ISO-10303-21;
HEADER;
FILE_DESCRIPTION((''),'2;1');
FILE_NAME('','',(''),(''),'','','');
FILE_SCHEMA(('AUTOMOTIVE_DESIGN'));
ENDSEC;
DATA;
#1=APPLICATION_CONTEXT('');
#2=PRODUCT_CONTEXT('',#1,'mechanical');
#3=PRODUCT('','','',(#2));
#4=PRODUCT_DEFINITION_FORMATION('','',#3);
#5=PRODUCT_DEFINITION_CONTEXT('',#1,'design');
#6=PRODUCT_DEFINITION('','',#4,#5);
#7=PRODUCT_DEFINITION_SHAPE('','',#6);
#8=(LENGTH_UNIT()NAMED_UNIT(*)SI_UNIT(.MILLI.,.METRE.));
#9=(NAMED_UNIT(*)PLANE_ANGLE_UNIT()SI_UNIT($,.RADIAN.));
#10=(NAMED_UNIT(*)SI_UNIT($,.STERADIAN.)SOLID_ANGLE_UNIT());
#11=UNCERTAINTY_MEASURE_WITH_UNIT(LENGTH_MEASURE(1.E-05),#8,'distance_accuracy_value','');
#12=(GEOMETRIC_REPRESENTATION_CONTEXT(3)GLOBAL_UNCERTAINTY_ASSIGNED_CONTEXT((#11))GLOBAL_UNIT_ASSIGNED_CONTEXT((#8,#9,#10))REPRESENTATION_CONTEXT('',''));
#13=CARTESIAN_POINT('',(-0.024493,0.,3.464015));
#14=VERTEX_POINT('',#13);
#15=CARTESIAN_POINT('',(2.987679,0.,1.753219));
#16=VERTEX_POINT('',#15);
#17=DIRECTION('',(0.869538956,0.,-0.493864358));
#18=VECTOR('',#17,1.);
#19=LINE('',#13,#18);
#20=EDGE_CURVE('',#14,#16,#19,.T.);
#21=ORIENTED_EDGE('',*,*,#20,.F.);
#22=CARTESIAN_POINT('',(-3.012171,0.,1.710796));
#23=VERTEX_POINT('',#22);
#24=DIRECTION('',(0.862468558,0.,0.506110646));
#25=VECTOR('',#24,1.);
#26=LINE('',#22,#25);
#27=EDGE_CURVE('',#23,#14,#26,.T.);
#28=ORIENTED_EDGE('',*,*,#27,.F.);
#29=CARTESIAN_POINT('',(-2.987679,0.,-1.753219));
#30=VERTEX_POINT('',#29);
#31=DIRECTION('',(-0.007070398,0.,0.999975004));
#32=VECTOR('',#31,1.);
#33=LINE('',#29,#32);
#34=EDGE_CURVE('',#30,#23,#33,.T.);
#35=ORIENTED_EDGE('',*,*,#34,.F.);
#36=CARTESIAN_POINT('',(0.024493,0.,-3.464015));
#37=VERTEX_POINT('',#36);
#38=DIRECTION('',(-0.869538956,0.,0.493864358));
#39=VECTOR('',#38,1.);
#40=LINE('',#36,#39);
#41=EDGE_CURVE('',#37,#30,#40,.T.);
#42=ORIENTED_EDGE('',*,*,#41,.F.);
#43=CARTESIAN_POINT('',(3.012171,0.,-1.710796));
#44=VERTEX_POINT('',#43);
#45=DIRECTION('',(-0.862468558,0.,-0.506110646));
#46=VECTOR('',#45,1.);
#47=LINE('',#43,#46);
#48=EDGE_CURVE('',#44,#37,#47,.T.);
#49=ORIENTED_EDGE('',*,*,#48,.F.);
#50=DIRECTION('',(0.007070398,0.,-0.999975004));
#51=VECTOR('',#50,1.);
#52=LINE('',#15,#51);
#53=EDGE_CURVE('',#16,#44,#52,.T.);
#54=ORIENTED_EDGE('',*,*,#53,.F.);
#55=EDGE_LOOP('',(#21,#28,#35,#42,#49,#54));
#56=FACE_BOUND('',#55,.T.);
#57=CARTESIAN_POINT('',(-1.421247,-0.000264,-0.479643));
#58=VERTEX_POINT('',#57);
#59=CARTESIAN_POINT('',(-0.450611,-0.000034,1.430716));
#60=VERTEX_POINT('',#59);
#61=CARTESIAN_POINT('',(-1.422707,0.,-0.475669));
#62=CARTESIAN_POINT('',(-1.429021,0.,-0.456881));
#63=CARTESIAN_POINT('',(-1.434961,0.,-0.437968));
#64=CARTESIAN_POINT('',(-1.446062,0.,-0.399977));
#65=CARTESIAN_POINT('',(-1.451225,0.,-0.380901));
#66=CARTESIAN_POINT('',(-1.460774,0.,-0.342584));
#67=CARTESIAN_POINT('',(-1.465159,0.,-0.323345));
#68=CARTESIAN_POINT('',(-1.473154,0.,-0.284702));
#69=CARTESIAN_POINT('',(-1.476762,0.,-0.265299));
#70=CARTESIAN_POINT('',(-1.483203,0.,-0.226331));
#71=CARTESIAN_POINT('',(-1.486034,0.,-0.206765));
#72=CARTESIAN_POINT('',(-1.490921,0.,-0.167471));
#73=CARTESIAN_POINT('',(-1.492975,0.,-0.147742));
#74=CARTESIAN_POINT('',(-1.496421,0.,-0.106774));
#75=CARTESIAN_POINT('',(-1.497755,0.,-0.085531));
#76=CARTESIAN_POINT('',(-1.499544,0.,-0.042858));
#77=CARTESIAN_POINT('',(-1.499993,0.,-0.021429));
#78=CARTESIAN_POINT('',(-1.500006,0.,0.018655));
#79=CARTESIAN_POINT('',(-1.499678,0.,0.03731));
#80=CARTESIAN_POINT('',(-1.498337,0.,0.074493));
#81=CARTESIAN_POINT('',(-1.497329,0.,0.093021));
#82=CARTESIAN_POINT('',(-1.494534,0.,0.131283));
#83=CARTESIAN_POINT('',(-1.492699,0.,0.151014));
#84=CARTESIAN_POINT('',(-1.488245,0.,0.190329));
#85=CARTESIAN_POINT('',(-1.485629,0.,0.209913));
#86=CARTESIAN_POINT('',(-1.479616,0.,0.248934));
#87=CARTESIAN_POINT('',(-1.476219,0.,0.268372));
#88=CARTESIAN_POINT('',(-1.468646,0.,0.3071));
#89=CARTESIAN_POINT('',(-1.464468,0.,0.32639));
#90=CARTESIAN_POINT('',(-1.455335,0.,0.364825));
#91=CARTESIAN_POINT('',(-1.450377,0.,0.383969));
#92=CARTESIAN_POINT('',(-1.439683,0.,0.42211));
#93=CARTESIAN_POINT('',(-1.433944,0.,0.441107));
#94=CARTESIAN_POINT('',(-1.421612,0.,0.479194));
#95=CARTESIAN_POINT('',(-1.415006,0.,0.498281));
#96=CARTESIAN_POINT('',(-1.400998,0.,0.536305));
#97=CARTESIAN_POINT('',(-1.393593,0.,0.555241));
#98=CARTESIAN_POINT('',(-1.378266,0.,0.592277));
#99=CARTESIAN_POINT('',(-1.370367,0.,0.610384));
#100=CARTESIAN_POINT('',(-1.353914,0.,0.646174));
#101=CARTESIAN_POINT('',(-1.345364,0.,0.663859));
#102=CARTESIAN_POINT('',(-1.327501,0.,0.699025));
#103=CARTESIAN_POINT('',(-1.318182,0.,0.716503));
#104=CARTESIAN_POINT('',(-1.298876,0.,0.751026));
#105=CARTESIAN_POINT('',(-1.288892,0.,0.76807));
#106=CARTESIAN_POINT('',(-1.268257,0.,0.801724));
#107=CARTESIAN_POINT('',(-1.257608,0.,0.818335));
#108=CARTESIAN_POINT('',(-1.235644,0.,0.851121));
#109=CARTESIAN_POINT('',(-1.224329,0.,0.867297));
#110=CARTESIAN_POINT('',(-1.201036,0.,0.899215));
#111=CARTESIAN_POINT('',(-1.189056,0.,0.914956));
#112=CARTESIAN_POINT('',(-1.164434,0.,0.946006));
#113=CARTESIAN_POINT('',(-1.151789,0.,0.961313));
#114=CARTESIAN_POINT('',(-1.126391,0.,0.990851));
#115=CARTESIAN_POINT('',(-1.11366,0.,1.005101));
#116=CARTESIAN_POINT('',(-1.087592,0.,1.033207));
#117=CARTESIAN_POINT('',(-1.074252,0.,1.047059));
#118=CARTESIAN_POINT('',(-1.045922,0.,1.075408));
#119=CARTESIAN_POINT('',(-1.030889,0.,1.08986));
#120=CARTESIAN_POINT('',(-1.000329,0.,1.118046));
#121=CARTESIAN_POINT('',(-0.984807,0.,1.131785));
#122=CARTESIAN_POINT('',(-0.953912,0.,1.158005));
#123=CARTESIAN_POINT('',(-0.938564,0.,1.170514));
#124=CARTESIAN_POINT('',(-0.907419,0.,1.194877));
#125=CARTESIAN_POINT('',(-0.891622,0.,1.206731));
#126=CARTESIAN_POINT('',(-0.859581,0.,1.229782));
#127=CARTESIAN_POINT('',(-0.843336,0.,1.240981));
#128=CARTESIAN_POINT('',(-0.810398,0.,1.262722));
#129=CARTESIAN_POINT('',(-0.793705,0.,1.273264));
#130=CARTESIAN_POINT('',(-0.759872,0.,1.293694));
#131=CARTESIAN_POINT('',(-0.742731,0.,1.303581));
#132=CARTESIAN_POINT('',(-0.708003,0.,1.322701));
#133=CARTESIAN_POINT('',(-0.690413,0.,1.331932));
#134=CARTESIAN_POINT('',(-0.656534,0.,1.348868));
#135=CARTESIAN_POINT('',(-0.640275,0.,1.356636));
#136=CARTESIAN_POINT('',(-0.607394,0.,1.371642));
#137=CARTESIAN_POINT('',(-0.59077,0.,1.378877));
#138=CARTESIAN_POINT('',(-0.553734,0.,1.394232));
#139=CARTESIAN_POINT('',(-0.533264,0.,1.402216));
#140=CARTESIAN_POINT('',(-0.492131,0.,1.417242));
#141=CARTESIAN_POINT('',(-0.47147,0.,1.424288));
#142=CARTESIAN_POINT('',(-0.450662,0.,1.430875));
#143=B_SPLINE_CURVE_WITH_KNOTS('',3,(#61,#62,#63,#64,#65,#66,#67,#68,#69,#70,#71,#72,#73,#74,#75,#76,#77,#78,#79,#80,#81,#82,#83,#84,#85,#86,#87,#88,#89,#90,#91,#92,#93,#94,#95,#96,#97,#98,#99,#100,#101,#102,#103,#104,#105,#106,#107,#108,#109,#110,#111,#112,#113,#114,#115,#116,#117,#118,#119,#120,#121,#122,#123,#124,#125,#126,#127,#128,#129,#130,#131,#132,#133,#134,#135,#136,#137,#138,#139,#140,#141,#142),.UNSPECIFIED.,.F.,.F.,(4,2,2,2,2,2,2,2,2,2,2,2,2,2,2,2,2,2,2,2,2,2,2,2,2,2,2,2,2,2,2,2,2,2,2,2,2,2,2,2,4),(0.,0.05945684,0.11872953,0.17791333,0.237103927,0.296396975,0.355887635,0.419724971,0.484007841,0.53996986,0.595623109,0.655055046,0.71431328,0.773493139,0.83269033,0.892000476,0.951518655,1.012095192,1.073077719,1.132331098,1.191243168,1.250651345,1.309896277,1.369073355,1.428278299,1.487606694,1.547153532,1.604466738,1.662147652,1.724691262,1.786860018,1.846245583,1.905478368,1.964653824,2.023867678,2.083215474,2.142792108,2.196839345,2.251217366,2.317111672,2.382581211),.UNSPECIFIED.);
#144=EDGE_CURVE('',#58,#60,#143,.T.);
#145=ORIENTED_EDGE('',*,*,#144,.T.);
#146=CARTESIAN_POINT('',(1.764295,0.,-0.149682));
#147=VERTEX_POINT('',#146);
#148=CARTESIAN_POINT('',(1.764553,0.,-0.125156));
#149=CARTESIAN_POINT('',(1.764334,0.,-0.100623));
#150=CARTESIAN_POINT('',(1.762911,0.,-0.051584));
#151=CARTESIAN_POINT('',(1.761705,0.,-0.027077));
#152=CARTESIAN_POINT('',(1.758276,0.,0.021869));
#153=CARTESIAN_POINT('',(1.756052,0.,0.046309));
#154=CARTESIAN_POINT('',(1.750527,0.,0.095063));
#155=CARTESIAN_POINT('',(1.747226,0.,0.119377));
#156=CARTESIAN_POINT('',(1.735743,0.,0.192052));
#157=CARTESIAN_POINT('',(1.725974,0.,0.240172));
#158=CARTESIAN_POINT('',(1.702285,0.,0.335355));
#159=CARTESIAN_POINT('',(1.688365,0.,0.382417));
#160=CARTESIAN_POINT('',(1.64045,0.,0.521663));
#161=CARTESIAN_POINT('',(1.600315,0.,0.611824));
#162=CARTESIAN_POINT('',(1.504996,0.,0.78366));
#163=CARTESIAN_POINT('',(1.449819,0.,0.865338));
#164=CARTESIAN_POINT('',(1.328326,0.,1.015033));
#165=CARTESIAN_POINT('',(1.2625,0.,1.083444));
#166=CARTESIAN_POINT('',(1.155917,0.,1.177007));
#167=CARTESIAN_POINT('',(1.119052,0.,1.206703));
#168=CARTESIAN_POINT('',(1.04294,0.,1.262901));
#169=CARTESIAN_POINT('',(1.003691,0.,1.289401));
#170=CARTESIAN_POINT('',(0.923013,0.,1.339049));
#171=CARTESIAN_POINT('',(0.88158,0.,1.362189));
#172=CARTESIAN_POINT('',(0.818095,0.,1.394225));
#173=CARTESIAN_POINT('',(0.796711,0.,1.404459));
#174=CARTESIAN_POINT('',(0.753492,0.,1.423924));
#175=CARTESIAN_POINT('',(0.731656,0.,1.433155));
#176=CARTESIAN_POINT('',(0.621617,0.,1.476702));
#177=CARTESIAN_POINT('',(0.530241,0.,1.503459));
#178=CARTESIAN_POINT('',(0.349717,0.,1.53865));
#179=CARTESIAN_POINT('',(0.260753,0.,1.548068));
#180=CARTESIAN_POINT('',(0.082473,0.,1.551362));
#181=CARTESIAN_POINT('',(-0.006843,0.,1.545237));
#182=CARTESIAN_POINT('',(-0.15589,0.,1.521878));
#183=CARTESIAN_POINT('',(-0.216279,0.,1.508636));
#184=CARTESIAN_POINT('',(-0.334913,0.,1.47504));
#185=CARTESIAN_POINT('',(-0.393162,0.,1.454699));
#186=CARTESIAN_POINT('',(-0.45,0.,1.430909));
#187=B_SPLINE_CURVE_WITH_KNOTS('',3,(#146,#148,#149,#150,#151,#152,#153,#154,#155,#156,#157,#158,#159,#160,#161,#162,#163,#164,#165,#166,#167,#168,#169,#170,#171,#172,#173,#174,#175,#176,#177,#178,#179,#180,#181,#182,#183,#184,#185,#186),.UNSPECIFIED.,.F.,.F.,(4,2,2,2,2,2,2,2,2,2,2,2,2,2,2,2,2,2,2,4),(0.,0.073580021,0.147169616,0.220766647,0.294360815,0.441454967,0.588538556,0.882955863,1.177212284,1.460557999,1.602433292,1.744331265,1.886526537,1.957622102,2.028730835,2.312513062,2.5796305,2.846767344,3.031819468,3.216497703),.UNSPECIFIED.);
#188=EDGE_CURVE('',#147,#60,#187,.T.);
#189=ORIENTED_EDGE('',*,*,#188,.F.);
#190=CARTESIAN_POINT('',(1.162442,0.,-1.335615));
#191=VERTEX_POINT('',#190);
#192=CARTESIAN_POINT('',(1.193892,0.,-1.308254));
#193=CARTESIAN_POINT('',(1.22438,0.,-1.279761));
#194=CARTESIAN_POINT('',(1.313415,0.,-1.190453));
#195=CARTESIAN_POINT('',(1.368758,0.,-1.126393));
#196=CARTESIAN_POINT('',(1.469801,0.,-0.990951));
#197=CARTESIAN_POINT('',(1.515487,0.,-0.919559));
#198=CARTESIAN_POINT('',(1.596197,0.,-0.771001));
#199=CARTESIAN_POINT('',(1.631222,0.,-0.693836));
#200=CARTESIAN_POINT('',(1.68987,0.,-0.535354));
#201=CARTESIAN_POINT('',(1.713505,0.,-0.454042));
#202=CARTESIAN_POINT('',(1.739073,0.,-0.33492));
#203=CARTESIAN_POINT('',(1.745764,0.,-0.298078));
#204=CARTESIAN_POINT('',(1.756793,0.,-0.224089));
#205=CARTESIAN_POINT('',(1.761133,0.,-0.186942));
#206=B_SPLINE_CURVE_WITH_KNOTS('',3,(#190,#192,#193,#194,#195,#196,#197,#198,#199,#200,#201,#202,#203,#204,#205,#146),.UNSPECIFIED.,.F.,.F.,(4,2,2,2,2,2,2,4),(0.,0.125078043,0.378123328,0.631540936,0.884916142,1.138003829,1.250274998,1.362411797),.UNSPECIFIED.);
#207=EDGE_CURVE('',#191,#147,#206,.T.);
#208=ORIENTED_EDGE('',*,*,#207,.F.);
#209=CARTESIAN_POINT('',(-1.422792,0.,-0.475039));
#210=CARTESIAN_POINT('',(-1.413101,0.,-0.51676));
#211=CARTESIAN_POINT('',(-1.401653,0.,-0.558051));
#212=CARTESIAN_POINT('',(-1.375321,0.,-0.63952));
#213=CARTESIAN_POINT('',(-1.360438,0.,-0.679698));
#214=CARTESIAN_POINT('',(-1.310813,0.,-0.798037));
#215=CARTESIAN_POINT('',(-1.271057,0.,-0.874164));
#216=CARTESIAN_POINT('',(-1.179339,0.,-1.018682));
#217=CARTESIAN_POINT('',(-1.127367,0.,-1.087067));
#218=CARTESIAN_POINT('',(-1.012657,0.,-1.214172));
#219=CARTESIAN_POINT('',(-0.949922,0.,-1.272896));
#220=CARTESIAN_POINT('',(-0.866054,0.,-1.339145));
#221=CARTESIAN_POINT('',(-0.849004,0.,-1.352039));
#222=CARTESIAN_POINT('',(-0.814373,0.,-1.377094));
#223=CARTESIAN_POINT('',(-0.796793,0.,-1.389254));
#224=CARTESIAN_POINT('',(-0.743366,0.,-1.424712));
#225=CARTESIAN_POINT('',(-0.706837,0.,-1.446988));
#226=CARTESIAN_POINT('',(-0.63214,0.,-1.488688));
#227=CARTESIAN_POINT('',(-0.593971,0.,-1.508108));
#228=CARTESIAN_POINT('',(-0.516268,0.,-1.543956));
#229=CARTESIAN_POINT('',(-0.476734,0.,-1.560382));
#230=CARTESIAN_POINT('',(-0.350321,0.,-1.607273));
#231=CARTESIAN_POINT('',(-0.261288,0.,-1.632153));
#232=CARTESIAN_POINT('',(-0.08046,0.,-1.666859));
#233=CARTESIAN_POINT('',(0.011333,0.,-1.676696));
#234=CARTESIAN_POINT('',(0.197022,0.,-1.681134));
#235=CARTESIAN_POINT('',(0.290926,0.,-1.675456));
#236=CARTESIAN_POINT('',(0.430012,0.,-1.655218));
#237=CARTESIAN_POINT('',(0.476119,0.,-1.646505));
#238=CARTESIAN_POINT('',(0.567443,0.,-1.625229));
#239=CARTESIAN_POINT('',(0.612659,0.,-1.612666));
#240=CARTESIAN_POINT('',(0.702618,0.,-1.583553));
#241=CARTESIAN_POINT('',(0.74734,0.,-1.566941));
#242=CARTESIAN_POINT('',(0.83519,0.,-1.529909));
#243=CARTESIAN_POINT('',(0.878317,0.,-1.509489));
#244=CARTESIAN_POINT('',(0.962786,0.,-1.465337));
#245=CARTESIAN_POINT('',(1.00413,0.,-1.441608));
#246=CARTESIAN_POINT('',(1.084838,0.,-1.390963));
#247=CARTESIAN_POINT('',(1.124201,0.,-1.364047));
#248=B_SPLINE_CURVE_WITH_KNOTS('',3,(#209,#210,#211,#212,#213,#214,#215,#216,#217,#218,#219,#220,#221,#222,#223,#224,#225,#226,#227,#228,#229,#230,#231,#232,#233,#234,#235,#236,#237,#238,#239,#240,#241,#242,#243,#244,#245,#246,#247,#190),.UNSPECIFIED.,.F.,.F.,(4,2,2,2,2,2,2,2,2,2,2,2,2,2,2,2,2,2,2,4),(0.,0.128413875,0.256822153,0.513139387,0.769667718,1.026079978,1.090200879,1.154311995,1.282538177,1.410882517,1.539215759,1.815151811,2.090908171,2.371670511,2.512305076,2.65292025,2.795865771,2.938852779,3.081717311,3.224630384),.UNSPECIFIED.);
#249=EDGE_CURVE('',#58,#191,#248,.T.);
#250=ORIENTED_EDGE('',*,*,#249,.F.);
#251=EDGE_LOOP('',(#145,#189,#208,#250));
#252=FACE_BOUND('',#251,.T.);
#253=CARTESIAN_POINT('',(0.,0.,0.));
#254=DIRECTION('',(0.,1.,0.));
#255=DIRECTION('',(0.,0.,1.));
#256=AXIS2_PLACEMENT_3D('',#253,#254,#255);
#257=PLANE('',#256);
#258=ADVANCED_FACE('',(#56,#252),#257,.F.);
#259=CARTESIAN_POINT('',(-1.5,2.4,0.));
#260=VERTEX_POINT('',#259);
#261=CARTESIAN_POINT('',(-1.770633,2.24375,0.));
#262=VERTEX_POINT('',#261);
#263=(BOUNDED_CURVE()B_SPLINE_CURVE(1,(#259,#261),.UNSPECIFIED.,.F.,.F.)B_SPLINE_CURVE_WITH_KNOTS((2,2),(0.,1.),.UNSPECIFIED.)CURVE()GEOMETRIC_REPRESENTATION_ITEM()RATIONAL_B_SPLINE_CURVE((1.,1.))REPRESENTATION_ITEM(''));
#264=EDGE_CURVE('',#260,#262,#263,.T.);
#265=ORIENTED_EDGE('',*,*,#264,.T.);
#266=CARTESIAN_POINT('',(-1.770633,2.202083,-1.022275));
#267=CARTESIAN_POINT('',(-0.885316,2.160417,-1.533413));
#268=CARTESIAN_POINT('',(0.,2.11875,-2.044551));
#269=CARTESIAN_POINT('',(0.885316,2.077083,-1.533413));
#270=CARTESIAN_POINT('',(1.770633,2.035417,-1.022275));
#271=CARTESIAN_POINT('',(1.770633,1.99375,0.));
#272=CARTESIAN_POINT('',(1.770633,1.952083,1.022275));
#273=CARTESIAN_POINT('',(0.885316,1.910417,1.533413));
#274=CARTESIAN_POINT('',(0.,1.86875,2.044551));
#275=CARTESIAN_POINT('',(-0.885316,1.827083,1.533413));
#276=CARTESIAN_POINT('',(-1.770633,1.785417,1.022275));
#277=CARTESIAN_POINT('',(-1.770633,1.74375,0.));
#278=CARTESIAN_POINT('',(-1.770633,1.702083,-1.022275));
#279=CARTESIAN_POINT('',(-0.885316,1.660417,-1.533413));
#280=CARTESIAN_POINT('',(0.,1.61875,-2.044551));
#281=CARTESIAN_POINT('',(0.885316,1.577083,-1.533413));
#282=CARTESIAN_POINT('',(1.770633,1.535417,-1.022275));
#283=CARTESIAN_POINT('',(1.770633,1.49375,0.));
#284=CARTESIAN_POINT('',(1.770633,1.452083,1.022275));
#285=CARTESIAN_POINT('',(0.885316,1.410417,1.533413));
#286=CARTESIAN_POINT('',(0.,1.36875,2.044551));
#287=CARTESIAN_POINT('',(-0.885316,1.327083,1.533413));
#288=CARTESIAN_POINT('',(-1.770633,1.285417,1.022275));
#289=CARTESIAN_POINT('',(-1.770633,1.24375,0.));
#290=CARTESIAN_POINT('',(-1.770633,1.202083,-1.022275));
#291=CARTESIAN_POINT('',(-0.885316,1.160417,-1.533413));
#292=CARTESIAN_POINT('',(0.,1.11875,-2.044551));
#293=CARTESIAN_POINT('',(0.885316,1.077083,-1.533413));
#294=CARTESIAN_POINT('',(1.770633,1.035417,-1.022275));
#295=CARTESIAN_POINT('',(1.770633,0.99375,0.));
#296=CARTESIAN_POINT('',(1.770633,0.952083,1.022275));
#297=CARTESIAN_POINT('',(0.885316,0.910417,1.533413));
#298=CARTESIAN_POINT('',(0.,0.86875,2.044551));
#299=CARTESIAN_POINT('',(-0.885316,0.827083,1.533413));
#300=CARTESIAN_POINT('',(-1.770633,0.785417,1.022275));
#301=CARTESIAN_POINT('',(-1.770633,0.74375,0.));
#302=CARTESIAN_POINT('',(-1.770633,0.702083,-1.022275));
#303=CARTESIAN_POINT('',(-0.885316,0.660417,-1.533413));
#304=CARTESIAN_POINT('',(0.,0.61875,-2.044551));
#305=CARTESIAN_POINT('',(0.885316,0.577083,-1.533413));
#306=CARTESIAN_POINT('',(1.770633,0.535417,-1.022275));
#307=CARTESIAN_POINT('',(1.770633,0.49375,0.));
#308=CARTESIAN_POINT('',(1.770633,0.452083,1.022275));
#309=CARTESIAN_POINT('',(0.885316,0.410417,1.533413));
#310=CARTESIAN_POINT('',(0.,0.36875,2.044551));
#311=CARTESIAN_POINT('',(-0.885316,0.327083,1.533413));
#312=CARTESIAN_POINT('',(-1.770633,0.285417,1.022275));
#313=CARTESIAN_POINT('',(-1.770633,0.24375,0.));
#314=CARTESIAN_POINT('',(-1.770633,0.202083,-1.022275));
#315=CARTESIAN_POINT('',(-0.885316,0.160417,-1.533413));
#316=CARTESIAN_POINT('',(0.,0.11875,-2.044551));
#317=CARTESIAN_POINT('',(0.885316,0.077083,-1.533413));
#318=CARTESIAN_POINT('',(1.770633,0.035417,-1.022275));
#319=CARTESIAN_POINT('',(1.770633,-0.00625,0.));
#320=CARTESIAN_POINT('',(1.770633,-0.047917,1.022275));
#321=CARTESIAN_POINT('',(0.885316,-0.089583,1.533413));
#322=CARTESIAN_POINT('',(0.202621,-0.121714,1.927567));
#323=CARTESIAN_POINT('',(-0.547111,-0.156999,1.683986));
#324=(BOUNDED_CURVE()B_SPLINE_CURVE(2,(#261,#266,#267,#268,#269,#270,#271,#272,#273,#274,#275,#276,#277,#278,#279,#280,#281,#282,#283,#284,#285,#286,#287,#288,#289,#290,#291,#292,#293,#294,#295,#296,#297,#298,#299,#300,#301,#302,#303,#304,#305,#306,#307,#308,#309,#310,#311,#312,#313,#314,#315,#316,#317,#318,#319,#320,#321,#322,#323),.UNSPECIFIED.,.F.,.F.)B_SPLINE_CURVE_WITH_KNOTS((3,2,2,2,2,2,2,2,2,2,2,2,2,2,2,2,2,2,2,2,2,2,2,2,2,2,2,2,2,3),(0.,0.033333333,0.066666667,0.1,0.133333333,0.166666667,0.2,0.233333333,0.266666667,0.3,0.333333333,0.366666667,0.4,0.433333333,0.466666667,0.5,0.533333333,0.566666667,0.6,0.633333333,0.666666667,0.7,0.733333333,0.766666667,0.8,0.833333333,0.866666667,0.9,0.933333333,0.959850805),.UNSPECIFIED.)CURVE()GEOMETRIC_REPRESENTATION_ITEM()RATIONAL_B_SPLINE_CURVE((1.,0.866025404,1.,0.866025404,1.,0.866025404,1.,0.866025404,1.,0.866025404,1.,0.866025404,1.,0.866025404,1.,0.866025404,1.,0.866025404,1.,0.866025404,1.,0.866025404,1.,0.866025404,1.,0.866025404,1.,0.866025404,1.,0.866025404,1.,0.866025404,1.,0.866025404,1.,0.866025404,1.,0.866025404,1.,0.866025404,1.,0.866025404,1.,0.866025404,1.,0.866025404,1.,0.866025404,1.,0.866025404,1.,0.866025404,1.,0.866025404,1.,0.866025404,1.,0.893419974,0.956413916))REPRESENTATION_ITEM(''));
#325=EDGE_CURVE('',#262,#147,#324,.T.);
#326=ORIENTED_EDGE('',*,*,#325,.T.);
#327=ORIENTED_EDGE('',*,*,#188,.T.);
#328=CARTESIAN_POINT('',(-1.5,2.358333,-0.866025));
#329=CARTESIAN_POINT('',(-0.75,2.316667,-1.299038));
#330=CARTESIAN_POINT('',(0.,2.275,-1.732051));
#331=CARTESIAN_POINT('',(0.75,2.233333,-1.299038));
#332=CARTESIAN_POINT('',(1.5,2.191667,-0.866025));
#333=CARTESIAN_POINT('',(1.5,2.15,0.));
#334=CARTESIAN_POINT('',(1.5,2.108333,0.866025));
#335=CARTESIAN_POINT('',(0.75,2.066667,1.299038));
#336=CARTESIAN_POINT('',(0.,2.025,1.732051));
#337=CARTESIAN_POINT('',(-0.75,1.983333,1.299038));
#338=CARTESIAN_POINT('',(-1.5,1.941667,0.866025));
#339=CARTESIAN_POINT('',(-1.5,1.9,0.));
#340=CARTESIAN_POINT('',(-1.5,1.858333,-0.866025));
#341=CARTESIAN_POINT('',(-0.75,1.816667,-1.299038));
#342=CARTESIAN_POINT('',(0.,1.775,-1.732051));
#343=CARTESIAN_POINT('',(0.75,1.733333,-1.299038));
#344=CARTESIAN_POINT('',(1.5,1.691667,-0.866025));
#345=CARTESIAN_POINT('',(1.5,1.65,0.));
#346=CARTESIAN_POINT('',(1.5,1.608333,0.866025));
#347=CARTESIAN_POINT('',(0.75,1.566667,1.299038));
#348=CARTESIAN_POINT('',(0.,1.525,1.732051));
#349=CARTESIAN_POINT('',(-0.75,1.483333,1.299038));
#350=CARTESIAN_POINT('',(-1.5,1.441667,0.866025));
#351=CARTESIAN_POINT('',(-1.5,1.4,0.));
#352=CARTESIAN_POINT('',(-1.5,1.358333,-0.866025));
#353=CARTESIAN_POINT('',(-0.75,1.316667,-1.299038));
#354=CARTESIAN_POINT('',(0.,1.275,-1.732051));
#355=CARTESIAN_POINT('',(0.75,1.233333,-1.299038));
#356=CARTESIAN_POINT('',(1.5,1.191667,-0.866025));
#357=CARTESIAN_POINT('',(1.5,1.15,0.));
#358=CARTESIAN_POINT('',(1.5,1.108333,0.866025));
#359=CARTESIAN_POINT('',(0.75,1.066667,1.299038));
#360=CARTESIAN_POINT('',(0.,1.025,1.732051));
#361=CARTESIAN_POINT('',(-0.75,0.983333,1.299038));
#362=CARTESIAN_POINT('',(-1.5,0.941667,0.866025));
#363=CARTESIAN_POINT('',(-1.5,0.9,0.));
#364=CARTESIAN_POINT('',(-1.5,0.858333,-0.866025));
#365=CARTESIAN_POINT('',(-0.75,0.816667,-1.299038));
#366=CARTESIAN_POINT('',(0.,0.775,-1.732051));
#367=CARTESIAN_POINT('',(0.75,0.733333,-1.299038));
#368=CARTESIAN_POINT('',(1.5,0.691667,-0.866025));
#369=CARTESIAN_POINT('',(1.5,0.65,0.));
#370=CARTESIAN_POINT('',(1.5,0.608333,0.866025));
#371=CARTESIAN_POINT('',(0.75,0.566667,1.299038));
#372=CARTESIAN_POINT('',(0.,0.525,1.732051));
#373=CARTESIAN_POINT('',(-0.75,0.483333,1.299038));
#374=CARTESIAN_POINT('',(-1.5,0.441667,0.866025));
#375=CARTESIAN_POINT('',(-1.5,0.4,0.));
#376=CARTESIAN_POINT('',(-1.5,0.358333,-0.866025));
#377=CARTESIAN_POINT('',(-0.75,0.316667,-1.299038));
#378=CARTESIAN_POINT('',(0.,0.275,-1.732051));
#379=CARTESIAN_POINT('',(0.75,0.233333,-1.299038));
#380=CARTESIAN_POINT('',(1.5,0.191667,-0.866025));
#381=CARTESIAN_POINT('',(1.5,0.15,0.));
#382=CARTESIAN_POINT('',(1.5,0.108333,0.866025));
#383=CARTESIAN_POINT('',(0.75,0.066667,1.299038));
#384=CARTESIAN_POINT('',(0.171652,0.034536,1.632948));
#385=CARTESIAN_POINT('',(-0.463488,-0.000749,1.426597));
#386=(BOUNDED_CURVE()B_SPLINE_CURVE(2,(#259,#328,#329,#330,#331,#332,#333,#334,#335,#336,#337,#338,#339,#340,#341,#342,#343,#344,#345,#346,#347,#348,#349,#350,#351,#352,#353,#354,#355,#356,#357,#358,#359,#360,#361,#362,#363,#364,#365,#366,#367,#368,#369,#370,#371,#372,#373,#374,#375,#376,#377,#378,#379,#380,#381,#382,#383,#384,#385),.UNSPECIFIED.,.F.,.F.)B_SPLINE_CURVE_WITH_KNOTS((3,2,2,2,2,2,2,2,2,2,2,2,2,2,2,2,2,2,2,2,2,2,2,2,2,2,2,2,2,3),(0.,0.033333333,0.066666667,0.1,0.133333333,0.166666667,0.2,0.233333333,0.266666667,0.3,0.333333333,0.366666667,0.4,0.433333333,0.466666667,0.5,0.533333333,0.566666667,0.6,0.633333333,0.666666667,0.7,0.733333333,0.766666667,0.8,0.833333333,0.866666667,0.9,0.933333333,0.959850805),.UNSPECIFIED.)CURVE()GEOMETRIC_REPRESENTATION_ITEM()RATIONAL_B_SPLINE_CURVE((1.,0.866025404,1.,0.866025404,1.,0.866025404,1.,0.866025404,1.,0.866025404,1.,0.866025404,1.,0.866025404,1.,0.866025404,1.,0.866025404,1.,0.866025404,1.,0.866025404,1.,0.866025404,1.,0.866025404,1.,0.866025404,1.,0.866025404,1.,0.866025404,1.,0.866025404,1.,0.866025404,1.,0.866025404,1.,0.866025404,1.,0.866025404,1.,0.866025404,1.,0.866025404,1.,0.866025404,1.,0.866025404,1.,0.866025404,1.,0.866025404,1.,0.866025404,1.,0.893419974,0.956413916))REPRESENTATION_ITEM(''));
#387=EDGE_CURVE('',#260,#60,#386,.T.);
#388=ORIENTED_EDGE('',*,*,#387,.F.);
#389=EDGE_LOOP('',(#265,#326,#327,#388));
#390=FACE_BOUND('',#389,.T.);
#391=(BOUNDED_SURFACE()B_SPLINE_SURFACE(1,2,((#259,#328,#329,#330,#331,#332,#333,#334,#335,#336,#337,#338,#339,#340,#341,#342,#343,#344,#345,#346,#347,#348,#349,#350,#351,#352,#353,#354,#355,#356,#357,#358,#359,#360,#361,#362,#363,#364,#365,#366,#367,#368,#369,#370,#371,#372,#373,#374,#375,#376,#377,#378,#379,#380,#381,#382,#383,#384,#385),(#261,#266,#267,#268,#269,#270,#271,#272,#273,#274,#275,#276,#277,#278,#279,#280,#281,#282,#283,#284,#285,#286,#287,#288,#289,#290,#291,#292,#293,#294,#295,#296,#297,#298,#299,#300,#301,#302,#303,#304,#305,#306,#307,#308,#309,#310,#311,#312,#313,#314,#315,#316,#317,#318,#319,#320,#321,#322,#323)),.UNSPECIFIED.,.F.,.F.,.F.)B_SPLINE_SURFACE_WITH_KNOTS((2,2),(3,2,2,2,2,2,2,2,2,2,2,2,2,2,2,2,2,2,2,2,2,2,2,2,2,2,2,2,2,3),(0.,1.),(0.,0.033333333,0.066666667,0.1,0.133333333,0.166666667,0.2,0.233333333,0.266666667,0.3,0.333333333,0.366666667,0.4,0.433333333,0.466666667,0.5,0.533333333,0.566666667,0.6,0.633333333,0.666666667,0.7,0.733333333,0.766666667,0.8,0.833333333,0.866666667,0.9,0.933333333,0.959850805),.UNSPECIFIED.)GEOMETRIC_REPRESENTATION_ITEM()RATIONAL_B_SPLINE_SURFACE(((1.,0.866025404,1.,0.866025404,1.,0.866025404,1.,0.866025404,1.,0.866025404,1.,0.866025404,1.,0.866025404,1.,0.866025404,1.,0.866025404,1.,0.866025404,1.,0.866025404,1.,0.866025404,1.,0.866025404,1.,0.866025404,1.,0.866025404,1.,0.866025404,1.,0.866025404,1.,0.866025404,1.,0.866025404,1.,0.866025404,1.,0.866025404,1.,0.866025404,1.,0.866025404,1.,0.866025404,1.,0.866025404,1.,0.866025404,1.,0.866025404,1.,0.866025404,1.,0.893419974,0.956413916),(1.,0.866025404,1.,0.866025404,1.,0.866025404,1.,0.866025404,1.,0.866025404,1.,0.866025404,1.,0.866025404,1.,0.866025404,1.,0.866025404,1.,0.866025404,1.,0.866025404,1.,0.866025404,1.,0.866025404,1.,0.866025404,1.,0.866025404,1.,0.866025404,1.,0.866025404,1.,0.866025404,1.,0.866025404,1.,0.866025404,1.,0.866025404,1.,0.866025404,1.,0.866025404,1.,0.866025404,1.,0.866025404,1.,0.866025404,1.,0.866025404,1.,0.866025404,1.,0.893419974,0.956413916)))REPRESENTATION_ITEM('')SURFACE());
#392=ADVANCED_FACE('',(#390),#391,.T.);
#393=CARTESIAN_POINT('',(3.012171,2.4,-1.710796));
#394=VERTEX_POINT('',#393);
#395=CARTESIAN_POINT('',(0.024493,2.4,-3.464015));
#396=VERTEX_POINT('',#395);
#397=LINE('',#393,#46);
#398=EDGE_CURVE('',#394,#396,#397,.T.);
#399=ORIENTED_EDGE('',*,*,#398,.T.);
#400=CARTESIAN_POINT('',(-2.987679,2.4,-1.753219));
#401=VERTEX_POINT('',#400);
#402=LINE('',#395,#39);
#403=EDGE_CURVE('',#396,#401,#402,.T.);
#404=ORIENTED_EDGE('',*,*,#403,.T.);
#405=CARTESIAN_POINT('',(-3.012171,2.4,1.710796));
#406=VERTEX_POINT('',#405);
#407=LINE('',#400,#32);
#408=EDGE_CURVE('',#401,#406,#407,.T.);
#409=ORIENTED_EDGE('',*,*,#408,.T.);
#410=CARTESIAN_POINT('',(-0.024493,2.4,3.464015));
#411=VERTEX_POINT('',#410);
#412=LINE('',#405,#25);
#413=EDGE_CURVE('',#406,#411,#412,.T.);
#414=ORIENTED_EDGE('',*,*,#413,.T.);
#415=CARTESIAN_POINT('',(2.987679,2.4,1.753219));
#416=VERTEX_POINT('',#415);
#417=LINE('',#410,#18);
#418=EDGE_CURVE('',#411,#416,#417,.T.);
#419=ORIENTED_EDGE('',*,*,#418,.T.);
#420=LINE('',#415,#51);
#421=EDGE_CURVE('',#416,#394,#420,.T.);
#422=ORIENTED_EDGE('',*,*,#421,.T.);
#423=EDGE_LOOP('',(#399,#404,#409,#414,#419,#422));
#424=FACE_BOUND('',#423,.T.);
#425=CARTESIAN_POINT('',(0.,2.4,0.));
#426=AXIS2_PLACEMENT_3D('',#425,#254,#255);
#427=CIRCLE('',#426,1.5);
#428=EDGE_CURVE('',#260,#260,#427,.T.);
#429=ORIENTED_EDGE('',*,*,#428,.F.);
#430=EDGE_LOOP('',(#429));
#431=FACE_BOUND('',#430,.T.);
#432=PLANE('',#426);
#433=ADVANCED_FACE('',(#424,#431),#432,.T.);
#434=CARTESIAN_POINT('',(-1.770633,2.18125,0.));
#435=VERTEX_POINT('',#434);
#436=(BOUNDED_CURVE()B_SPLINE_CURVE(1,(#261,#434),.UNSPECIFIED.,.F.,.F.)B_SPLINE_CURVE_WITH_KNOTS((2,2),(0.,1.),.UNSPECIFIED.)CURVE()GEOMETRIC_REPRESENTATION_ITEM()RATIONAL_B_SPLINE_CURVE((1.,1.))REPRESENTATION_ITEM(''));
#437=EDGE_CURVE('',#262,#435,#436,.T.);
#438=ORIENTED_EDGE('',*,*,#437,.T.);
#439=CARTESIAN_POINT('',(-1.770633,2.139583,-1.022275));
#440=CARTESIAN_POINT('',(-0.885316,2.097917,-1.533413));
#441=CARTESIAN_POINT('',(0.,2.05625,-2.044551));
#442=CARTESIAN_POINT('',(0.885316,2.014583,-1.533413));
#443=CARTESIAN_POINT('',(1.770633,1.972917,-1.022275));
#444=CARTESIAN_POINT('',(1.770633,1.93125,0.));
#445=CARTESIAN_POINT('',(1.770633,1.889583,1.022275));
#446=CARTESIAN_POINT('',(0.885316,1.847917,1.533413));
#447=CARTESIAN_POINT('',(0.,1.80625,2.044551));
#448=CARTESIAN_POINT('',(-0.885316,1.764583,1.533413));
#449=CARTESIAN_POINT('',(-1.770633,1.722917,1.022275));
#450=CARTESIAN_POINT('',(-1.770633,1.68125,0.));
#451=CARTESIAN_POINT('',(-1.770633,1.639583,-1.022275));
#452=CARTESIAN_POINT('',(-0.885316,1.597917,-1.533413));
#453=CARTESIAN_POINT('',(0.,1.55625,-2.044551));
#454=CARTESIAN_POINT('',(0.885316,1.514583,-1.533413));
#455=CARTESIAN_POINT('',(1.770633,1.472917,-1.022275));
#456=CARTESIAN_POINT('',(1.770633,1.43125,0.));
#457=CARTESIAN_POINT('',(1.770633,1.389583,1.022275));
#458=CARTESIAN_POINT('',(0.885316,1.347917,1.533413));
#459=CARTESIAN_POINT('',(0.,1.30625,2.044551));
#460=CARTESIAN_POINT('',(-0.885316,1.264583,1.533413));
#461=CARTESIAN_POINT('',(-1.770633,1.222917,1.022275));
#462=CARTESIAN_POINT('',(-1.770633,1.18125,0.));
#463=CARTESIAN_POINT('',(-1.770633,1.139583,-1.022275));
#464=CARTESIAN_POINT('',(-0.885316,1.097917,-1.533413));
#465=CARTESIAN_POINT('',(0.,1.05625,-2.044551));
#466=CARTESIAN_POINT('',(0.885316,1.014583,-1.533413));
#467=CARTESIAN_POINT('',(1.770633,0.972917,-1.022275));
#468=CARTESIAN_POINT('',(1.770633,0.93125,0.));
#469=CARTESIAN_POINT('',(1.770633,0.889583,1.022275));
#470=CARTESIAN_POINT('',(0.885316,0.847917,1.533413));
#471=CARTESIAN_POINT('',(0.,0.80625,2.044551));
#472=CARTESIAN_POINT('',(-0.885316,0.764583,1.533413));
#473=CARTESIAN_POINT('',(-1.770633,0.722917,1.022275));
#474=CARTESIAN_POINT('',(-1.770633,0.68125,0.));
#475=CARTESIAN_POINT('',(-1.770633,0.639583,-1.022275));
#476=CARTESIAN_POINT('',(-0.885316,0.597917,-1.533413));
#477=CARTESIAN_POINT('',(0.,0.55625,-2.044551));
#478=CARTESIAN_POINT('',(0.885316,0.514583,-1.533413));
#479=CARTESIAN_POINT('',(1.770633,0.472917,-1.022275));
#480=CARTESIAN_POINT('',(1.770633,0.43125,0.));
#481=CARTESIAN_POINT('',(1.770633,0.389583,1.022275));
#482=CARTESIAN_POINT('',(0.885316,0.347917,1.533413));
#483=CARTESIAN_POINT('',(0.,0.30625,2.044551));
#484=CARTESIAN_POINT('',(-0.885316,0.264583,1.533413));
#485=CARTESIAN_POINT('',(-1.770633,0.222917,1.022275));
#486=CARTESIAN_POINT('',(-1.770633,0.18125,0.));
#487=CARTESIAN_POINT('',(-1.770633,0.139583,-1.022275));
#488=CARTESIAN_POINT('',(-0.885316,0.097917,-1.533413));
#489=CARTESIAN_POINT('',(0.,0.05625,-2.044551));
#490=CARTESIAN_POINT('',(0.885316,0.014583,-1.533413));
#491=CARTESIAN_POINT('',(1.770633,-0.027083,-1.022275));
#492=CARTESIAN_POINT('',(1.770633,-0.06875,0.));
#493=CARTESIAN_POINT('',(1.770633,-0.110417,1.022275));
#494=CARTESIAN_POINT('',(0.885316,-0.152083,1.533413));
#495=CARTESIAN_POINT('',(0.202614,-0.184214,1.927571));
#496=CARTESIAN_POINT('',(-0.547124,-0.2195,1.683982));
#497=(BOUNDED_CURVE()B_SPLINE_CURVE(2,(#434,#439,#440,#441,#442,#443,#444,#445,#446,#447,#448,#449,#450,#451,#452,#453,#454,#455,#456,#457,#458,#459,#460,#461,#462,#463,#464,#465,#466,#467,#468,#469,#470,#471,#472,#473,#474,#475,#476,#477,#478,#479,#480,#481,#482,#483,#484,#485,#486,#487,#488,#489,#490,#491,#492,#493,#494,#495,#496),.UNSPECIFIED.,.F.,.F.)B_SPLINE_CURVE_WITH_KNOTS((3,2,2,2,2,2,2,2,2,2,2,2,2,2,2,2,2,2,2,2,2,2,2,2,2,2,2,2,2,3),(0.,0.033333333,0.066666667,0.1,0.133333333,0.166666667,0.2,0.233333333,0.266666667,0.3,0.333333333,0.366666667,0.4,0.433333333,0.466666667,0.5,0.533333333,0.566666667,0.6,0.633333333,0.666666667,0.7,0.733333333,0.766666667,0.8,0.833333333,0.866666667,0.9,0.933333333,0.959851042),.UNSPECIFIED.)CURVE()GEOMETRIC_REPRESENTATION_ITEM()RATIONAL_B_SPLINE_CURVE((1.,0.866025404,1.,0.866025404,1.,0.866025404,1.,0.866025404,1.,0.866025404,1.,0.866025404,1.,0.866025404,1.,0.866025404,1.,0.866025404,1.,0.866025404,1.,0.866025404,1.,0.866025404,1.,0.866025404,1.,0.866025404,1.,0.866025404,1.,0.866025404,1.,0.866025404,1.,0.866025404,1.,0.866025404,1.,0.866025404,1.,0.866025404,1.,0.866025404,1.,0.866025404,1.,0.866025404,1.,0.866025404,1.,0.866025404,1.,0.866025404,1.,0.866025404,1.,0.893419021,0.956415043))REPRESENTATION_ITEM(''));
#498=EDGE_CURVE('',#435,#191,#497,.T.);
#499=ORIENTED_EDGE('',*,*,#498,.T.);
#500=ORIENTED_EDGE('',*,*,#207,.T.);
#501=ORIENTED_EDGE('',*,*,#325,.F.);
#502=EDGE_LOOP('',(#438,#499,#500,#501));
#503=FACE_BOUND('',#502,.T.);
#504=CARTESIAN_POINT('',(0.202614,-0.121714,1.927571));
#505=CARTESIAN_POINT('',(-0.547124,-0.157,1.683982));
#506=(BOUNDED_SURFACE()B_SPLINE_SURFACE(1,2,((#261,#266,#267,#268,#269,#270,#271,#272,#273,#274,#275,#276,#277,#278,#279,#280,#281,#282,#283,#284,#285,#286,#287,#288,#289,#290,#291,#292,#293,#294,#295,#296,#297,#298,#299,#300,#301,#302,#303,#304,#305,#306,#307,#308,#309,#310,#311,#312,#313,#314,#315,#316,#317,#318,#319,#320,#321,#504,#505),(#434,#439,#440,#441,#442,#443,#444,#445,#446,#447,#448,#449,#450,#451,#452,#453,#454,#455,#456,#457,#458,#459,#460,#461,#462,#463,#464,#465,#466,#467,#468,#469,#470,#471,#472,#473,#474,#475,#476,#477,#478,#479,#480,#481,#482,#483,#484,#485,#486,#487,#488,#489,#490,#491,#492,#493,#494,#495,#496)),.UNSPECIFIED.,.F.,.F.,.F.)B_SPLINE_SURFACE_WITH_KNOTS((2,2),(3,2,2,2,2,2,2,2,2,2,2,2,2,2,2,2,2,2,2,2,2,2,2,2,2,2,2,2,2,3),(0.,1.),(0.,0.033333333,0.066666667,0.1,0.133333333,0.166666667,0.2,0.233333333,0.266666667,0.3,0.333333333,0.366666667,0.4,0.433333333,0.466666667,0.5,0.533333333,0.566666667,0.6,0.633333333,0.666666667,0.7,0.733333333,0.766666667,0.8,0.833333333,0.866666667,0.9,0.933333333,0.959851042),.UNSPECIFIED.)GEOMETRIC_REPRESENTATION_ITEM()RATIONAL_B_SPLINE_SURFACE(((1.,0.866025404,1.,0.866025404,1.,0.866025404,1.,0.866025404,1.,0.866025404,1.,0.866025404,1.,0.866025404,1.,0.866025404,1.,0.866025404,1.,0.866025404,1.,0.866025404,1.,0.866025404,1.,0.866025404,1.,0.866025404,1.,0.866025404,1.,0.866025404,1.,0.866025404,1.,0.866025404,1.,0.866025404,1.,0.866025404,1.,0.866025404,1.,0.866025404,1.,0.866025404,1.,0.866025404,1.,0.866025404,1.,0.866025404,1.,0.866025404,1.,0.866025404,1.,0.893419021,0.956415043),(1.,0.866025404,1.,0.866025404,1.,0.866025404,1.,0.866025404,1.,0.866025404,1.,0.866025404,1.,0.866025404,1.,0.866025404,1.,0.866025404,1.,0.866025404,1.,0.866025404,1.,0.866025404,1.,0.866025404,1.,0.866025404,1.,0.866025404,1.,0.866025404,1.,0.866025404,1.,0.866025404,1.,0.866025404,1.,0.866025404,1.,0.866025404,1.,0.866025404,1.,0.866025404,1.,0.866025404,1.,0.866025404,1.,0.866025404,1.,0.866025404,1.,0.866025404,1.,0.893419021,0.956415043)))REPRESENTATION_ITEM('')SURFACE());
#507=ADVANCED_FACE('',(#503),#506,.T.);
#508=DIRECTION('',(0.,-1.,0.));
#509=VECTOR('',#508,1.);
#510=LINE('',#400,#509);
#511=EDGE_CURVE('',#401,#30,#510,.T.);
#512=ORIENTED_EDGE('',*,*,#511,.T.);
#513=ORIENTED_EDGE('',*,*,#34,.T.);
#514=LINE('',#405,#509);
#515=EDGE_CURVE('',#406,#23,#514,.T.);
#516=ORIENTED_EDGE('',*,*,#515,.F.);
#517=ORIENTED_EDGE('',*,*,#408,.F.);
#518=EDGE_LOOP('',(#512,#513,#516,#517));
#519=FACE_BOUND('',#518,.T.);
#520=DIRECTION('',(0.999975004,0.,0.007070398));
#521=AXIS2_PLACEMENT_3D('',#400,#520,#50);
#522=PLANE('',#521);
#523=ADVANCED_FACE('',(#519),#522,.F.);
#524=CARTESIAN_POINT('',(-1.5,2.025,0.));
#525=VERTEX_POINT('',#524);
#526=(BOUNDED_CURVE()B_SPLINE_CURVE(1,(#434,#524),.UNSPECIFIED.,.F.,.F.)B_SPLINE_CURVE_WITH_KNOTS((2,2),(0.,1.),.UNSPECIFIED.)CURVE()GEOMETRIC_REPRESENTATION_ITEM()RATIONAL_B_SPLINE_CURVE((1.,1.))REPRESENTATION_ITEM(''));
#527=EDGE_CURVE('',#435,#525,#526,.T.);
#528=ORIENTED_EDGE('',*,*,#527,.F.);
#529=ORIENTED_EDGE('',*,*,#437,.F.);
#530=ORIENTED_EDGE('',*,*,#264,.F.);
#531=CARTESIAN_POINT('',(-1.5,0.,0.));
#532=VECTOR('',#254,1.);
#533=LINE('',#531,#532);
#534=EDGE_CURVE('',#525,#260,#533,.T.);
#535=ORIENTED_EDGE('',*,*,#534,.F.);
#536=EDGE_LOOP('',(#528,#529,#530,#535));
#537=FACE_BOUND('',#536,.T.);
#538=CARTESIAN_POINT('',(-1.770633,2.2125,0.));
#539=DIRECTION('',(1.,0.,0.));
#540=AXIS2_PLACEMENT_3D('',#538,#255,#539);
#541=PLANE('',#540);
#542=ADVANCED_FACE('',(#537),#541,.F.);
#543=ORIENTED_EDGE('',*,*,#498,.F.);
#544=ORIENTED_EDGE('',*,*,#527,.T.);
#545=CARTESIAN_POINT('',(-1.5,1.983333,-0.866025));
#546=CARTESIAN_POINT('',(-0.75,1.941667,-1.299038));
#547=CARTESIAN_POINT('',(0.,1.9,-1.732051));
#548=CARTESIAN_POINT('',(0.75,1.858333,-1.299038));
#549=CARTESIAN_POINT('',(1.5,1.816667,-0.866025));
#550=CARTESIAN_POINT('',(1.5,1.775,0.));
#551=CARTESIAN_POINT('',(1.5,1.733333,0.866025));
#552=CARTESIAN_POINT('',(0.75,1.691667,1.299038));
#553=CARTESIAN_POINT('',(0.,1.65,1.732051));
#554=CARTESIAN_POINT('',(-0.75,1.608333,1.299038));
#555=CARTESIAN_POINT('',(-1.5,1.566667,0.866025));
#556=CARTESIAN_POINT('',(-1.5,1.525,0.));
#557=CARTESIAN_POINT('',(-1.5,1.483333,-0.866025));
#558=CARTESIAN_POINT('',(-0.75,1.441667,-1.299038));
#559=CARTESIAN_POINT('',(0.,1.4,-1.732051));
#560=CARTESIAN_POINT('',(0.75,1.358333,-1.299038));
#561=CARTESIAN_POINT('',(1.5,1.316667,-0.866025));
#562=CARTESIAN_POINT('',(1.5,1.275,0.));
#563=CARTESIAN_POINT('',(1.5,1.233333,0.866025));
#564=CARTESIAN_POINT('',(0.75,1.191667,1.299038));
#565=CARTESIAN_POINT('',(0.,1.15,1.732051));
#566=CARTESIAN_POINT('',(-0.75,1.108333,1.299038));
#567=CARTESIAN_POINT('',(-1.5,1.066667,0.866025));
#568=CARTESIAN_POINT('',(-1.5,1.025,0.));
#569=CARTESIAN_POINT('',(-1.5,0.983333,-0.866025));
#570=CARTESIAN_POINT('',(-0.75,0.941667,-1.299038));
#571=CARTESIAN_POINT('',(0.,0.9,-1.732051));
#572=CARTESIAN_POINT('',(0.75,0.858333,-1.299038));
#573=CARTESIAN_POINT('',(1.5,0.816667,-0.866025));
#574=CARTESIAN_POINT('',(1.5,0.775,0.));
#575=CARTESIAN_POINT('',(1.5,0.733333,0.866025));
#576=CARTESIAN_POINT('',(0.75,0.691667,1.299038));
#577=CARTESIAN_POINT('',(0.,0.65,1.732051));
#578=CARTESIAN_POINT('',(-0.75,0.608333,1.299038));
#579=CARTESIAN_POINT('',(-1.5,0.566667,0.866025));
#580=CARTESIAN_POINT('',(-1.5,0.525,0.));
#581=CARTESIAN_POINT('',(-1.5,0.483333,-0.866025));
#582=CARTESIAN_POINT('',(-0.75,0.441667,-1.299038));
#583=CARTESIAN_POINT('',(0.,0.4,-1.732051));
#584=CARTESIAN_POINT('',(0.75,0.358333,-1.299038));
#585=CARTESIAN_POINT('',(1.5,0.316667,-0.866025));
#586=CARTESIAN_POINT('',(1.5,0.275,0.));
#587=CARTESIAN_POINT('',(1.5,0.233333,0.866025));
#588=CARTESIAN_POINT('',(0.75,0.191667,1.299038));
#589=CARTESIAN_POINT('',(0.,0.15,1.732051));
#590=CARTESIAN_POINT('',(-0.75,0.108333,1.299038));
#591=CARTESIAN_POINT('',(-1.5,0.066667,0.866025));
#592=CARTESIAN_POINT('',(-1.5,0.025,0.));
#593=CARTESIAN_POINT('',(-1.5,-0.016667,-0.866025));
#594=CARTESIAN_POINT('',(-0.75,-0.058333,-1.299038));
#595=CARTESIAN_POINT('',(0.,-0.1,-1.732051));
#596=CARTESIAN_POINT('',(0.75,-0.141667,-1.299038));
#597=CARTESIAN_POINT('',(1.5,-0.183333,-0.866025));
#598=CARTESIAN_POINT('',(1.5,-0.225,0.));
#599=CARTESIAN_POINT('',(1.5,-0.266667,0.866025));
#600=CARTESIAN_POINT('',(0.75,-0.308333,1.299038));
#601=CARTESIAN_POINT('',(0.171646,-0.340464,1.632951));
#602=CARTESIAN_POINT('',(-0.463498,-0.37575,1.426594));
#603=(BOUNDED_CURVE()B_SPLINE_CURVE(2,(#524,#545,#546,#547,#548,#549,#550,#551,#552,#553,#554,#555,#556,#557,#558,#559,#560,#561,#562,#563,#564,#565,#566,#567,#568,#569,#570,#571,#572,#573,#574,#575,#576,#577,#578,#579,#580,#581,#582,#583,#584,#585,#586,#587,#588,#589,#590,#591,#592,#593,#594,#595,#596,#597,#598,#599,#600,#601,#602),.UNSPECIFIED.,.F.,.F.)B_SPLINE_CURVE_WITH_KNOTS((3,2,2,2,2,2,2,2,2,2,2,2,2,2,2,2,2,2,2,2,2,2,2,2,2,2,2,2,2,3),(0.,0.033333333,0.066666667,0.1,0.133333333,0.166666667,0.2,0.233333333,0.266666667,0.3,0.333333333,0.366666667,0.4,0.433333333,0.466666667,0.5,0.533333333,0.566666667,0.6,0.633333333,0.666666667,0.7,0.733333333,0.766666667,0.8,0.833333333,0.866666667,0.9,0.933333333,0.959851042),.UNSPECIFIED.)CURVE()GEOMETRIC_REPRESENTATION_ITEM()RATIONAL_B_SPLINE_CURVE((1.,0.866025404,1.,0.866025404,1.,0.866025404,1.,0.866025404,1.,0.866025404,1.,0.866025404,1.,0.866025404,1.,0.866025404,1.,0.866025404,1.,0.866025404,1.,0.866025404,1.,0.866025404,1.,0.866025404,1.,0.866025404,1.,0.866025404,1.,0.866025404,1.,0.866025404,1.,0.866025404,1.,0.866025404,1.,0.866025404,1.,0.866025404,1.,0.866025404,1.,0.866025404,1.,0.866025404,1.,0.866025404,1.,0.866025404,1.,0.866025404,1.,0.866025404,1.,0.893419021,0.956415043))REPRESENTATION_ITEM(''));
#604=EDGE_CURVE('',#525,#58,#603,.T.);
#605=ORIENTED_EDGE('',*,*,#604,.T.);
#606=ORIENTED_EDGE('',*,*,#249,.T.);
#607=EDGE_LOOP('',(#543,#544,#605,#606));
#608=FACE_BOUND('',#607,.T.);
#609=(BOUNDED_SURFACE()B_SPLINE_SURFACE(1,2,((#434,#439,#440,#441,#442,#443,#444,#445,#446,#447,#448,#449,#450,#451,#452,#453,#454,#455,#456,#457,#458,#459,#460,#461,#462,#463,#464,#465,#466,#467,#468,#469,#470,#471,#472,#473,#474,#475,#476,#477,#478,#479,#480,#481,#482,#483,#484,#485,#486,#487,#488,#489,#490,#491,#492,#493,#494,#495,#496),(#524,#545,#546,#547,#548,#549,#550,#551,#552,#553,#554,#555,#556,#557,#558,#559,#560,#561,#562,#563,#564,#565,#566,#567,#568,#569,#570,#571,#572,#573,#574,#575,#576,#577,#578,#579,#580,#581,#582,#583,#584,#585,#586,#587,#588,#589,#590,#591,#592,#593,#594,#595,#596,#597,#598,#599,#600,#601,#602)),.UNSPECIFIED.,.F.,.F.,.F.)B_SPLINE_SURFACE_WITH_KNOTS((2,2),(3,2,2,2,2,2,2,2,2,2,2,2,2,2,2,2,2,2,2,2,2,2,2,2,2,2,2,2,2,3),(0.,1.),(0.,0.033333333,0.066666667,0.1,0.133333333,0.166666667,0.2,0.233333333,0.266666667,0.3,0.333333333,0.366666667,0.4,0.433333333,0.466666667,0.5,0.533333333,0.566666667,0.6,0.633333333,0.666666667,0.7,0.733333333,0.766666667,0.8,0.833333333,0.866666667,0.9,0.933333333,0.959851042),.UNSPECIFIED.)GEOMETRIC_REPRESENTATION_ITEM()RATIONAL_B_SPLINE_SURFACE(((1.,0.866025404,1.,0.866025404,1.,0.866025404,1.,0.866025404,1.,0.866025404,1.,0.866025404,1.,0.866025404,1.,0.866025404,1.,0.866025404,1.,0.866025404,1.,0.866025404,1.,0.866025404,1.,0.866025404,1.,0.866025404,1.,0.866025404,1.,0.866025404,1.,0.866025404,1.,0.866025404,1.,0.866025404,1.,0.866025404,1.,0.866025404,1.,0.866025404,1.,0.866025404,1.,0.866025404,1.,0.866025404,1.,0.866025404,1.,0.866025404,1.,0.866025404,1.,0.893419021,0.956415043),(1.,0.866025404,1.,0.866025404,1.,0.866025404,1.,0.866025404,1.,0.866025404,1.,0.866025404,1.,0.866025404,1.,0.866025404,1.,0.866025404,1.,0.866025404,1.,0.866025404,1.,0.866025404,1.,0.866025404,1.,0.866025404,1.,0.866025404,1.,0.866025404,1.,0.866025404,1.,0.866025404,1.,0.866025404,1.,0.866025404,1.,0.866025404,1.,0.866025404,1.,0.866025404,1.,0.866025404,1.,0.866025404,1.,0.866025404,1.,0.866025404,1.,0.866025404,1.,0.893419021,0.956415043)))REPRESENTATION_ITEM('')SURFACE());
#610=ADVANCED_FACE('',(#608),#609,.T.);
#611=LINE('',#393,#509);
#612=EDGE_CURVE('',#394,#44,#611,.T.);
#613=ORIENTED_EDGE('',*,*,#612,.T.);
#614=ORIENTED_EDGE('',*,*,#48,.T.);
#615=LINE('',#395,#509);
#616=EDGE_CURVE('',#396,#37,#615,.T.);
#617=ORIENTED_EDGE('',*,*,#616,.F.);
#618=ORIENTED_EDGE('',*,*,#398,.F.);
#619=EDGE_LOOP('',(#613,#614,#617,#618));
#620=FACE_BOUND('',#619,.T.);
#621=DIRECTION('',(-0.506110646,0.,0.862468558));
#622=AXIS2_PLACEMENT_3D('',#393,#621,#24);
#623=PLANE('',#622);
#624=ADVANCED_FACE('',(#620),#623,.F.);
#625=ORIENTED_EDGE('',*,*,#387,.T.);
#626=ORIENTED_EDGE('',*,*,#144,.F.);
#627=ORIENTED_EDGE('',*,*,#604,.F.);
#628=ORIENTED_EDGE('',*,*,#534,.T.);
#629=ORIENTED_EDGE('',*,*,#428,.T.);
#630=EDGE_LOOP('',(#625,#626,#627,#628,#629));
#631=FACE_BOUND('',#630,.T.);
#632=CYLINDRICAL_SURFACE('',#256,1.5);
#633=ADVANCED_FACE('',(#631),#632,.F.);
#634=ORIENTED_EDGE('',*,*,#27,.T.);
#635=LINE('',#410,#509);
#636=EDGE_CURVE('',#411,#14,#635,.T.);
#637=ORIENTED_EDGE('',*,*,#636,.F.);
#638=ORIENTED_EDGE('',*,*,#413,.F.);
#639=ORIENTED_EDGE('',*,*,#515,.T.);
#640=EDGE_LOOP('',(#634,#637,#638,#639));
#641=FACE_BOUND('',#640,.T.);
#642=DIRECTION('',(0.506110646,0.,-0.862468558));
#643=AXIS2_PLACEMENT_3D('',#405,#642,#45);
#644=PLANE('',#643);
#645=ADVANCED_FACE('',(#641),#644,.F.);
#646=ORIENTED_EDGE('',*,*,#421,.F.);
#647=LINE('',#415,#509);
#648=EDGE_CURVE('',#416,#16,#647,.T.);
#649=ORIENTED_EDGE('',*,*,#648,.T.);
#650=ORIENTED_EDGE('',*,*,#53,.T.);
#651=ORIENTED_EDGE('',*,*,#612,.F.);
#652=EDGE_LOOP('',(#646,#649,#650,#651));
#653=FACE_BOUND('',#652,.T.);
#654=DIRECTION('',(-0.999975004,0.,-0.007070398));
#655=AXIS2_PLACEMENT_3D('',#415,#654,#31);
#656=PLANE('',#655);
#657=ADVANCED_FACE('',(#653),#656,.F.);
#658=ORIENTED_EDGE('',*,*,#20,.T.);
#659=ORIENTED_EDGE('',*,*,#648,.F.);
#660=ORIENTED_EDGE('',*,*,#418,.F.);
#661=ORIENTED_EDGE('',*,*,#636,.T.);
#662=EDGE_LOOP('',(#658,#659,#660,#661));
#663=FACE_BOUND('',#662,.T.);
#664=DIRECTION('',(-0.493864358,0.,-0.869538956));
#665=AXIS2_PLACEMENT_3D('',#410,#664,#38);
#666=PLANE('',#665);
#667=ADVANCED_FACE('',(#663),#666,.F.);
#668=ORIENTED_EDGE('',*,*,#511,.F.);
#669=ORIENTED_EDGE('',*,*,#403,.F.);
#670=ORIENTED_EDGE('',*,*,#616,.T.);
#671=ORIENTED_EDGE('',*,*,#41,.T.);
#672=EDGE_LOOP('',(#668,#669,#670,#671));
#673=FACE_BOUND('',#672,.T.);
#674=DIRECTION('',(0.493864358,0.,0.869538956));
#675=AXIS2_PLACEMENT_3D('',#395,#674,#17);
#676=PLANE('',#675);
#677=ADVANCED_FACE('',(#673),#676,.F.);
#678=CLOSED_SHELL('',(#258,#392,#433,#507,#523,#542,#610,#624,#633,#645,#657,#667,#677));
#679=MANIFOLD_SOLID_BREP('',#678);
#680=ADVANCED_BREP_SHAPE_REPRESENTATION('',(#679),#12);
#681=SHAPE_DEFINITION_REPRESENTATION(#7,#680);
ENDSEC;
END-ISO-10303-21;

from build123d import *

# Parameters (mm, degrees)
BOSS_EXTRUDE1_DEPTH = 2.4
SKETCH2_R           = 1.5
CUT_EXTRUDE1_DEPTH  = 2.4
THREAD2_PITCH       = 0.5


with BuildPart() as part:
    # Sketch1 → Boss-Extrude1 (new body)
    with BuildSketch(Plane(origin=(0, 0, 0), x_dir=(1, 0, 0), z_dir=(0, 1, 0))):
        Polygon((3.012171301, 1.710796321), (0.024492575, 3.464015028), (-2.987678726, 1.753218706), (-3.012171301, -1.710796321), (-0.024492575, -3.464015028), (2.987678726, -1.753218706), align=None)
    extrude(amount=BOSS_EXTRUDE1_DEPTH)

    # Sketch2 → Cut-Extrude1 (cut)
    with BuildSketch(Plane(origin=(0, 2.4, 0), x_dir=(1, 0, 0), z_dir=(0, 1, 0))):
        with Locations(Location((0, 0, 0), (0, 0, 270))):
            Circle(SKETCH2_R)
    extrude(amount=-CUT_EXTRUDE1_DEPTH, mode=Mode.SUBTRACT)

    # Thread2: the profile of Thread Profile2 profile screwed along a right-hand helix of 4.8 turns, 6 arcs to a turn; built about Z, then put on its axis
    thread2_z = Axis((0, 0, 0), (0, 0, 1))
    thread2_corners = [(1.4997, 0, -0.000173205), (1.770632938, 0, 0.156249999), (1.770632938, 0, 0.218749999), (1.4997, 0, 0.375173204)]
    with BuildLine(mode=Mode.PRIVATE) as thread2_profile:
        Line(thread2_corners[0], thread2_corners[1])
        Line(thread2_corners[1], thread2_corners[2])
        Line(thread2_corners[2], thread2_corners[3])
        Line(thread2_corners[3], thread2_corners[0])
    thread2_cap = Face(thread2_profile.wire())
    thread2_turn_angles = [0, 30, 60, 90, 120, 150, 180, 210, 240, 270, 300, 330, 360]
    thread2_turn_weights = [1, 0.8660254037844387, 1, 0.8660254037844387, 1, 0.8660254037844387, 1, 0.8660254037844387, 1, 0.8660254037844387, 1, 0.8660254037844387, 1]
    thread2_turn_rails = [Edge.make_bspline([Vector(p[0], p[1], 0).rotate(thread2_z, thread2_turn_angles[k]) / thread2_turn_weights[k] + Vector(0, 0, p[2] + THREAD2_PITCH * thread2_turn_angles[k] / 360) for k in range(13)], [0, 0, 0, 1, 1, 2, 2, 3, 3, 4, 4, 5, 5, 6, 6, 6], 2, thread2_turn_weights) for p in thread2_corners]
    thread2_turn_sides = [Face.make_surface_from_curves(thread2_turn_rails[p[0]], thread2_turn_rails[p[1]]) for p in [(0, 1), (1, 2), (2, 3), (3, 0)]]
    thread2_last_angles = [1440, 1470, 1500, 1530, 1560, 1590, 1620, 1650, 1680, 1704, 1728]
    thread2_last_weights = [1, 0.8660254037844387, 1, 0.8660254037844387, 1, 0.8660254037844387, 1, 0.8660254037844387, 1, 0.9135454576426009, 1]
    thread2_last_rails = [Edge.make_bspline([Vector(p[0], p[1], 0).rotate(thread2_z, thread2_last_angles[k]) / thread2_last_weights[k] + Vector(0, 0, p[2] + THREAD2_PITCH * thread2_last_angles[k] / 360) for k in range(11)], [0, 0, 0, 1, 1, 2, 2, 3, 3, 4, 4, 5, 5, 5], 2, thread2_last_weights) for p in thread2_corners]
    thread2_last_sides = [Face.make_surface_from_curves(thread2_last_rails[p[0]], thread2_last_rails[p[1]]) for p in [(0, 1), (1, 2), (2, 3), (3, 0)]]
    thread2 = Plane(origin=(0, 2.4, 0), x_dir=(-1, 0, 0), z_dir=(0, -1, 0)) * Solid(Shell([*[p.moved(Location((0, 0, THREAD2_PITCH * i))) for i in range(4) for p in thread2_turn_sides], *thread2_last_sides, thread2_cap, thread2_cap.rotate(thread2_z, 1728).moved(Location((0, 0, THREAD2_PITCH * 1728 / 360)))]))
    add(thread2, mode=Mode.SUBTRACT)


solid = part.part
